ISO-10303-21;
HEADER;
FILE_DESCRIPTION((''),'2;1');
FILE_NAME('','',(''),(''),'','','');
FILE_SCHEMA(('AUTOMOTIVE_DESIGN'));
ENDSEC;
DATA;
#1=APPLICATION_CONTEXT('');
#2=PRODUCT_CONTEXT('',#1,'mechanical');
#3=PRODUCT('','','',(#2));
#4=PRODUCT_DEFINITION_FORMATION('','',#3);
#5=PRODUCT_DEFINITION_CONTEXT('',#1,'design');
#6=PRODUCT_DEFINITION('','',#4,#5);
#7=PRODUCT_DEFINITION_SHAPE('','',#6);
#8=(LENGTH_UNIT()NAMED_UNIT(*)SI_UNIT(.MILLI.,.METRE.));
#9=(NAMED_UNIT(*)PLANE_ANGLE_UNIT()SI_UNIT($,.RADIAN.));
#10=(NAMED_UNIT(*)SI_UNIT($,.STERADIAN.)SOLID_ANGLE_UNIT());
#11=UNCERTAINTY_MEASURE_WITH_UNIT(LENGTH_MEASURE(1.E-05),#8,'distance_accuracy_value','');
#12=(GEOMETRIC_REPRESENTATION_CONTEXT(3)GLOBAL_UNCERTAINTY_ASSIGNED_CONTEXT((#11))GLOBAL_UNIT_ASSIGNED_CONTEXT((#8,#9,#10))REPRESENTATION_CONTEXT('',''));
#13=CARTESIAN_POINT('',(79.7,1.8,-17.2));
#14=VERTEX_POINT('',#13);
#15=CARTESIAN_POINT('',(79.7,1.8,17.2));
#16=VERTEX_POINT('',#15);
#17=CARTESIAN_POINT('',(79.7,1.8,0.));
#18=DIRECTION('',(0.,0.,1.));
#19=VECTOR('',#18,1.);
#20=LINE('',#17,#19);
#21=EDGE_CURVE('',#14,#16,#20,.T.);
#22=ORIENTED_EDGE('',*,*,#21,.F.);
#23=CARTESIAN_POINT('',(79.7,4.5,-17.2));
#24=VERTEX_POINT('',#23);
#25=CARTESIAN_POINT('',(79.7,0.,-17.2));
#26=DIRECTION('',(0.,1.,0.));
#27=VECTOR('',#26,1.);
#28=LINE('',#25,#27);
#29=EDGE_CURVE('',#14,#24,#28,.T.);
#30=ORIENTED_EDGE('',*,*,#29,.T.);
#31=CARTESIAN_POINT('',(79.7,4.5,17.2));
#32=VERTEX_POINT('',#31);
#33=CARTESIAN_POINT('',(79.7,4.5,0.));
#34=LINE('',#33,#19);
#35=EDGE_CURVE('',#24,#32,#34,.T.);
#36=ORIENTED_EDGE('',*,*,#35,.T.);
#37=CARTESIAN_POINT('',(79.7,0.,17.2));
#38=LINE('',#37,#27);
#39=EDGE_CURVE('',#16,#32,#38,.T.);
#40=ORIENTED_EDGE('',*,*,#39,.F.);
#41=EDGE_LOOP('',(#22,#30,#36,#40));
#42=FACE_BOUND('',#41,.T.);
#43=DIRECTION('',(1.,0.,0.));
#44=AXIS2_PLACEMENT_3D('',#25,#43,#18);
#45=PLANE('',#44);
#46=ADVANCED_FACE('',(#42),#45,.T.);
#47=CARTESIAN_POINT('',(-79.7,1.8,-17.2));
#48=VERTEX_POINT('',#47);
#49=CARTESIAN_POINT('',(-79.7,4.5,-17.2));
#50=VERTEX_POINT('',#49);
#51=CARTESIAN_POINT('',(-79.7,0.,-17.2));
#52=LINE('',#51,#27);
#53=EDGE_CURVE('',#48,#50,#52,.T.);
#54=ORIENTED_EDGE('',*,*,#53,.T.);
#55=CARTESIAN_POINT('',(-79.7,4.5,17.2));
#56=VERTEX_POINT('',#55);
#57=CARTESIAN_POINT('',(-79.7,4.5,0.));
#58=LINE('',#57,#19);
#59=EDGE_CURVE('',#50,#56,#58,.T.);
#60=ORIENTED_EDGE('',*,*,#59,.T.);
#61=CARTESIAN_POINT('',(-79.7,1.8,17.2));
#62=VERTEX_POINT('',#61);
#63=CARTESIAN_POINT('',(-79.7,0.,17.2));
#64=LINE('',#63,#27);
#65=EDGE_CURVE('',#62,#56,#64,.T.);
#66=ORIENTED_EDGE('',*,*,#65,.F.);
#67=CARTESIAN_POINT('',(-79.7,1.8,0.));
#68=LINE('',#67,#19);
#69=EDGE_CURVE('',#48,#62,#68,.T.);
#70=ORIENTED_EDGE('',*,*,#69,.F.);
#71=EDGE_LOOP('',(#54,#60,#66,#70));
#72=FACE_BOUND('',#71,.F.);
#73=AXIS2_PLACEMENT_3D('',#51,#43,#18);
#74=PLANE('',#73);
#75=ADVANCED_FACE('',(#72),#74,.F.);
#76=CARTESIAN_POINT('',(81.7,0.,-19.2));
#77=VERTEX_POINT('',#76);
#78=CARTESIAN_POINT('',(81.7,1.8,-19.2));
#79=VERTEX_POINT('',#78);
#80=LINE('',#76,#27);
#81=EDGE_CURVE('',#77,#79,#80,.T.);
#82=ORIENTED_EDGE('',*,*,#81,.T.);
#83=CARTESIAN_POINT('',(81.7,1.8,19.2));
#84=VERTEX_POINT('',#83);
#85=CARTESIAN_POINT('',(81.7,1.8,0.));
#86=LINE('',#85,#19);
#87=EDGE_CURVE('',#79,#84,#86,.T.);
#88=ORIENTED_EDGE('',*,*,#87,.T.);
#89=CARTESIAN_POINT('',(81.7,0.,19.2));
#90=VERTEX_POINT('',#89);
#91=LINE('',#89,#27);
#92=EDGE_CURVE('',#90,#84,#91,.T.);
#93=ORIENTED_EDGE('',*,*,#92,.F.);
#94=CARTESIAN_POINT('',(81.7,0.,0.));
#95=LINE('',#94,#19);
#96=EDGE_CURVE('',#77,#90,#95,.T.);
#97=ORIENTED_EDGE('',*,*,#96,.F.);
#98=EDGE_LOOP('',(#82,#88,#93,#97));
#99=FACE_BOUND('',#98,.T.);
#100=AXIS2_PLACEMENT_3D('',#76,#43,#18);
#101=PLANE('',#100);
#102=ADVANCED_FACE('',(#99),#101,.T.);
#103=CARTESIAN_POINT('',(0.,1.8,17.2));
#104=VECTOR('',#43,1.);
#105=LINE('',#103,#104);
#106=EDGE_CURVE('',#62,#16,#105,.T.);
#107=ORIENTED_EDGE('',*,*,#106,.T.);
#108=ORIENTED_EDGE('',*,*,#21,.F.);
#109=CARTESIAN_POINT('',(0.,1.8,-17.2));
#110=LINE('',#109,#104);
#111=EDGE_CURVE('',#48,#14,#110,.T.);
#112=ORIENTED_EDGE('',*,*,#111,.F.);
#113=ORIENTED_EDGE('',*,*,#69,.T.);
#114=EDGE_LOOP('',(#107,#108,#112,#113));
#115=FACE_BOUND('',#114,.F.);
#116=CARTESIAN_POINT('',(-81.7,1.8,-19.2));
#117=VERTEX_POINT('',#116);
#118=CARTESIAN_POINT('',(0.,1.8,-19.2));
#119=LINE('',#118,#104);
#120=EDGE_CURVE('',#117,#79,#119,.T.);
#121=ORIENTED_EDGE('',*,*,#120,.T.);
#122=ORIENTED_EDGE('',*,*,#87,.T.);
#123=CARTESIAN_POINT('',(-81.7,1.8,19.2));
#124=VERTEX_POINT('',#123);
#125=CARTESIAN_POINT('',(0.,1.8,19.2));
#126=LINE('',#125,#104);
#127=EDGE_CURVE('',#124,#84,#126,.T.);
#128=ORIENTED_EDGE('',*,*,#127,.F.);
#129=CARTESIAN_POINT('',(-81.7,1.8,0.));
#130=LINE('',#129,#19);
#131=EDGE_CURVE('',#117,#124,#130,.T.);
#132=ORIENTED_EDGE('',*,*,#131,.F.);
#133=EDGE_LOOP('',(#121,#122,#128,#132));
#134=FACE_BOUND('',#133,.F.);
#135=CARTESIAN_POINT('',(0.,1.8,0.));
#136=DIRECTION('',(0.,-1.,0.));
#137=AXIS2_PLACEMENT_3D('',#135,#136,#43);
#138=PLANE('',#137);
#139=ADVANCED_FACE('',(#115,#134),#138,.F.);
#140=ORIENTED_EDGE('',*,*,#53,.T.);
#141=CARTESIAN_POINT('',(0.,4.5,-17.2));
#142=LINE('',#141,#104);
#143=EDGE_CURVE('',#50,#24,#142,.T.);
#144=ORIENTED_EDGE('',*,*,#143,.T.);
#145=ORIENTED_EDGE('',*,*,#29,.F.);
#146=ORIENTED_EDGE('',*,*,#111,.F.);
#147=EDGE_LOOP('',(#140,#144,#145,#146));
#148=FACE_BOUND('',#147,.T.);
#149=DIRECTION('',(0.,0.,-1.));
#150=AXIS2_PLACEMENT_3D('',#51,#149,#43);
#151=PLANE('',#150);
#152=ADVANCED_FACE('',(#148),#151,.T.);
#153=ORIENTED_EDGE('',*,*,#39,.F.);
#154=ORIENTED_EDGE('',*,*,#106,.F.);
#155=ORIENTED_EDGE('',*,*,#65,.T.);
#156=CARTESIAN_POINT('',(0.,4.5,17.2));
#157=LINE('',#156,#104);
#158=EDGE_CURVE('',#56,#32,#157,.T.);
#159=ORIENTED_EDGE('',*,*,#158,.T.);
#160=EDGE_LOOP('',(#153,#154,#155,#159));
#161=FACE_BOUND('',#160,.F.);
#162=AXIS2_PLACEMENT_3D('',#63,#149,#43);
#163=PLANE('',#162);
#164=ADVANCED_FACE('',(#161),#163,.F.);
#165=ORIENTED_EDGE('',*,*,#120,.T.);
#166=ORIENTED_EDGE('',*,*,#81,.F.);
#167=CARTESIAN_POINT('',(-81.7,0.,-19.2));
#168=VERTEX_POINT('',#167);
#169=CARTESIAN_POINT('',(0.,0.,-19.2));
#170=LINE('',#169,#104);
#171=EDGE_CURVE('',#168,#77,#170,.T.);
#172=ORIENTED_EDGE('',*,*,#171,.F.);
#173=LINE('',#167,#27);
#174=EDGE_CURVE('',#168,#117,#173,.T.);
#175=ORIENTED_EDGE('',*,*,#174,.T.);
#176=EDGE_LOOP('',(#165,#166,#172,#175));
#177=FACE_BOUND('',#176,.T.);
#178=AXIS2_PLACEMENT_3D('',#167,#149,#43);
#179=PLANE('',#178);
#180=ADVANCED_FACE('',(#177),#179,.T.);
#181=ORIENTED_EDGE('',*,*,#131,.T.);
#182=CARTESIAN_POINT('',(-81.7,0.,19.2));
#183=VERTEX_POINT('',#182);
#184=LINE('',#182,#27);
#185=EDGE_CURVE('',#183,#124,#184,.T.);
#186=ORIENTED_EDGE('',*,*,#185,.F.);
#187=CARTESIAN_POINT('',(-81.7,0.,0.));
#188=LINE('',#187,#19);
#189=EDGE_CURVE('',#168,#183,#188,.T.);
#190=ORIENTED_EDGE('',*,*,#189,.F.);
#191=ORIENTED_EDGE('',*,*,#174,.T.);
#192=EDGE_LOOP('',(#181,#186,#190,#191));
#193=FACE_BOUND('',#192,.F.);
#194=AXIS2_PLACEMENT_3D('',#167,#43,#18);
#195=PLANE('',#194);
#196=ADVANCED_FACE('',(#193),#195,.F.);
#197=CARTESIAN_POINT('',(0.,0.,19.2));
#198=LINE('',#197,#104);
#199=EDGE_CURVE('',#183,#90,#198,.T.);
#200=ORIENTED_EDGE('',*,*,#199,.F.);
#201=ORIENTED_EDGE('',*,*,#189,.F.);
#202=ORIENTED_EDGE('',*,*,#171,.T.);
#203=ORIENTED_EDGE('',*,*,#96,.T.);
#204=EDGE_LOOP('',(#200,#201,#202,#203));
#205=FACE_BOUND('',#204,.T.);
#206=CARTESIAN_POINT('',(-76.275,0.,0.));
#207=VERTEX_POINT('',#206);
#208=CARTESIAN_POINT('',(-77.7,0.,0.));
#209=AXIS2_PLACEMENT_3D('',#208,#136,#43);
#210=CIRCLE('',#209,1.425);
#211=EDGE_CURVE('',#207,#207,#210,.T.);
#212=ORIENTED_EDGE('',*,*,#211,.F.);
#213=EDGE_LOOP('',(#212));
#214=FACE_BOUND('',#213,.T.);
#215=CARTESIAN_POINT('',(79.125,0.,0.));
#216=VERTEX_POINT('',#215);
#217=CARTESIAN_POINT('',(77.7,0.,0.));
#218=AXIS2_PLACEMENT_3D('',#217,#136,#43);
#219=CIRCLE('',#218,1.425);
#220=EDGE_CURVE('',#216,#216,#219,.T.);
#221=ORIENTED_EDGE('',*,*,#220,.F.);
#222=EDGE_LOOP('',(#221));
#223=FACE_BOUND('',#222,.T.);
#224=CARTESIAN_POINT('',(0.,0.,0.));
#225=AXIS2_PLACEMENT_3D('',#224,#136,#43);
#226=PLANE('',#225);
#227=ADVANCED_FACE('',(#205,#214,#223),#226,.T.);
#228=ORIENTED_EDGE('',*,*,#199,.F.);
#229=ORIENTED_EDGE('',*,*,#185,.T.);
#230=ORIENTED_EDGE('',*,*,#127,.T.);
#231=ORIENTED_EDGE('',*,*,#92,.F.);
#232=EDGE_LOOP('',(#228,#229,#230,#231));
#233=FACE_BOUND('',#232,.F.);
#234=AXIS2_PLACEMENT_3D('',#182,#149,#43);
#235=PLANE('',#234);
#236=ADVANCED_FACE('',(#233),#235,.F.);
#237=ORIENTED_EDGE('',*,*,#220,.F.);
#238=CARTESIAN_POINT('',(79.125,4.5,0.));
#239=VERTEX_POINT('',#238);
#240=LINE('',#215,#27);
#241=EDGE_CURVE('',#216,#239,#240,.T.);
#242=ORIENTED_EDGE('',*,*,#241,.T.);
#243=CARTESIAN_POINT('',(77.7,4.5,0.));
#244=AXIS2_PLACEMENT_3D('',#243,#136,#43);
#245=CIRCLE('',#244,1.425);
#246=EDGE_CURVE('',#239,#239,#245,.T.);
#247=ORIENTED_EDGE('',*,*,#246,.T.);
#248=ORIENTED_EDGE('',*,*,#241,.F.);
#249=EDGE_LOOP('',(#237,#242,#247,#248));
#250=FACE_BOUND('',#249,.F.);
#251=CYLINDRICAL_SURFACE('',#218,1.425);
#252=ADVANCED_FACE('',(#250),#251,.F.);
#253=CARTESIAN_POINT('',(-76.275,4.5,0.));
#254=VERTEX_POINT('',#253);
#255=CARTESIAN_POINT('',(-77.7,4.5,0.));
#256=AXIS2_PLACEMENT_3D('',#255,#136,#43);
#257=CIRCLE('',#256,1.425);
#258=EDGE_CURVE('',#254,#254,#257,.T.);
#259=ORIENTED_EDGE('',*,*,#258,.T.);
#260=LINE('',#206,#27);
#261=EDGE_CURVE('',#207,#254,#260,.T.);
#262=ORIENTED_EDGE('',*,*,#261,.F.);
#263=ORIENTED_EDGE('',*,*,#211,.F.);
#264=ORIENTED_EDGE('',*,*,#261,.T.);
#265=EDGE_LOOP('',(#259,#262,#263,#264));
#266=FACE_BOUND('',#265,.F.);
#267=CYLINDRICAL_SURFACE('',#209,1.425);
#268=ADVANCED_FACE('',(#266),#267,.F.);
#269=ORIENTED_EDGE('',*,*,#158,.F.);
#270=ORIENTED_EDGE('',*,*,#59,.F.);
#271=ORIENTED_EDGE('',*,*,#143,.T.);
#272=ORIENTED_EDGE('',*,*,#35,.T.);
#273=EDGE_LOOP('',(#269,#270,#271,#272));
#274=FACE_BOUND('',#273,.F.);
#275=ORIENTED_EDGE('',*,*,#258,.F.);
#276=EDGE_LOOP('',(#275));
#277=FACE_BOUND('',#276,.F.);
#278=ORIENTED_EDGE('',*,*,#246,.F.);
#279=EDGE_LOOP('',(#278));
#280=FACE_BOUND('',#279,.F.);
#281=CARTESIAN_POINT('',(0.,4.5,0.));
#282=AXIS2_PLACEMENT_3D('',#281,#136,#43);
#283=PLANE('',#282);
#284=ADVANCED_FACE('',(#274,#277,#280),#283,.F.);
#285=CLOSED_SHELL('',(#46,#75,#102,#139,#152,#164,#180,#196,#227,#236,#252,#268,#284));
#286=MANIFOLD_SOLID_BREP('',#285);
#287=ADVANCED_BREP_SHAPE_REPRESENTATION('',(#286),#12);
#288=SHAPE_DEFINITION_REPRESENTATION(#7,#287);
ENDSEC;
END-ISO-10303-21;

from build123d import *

# Parameters (mm, degrees)
F0_W     = 159.4
F0_H     = 34.4
F0_R     = 1.425
F1_DEPTH = 4.5
F0_W_2   = 163.4
F0_H_2   = 38.4
F2_DEPTH = 1.8


with BuildPart() as f1:
    # F0 (on Front) → F1 (new body)
    with BuildSketch(Plane.XZ):
        Rectangle(F0_W, F0_H)
        with Locations((-77.7, 0)):
            Circle(F0_R, mode=Mode.SUBTRACT)
        with Locations((77.7, 0)):
            Circle(F0_R, mode=Mode.SUBTRACT)
    extrude(amount=-F1_DEPTH)

    # F0 (on Front) → F2 (join)
    with BuildSketch(Plane.XZ):
        Rectangle(F0_W_2, F0_H_2)
        Rectangle(F0_W, F0_H, mode=Mode.SUBTRACT)
    extrude(amount=-F2_DEPTH)


solid = f1.part
